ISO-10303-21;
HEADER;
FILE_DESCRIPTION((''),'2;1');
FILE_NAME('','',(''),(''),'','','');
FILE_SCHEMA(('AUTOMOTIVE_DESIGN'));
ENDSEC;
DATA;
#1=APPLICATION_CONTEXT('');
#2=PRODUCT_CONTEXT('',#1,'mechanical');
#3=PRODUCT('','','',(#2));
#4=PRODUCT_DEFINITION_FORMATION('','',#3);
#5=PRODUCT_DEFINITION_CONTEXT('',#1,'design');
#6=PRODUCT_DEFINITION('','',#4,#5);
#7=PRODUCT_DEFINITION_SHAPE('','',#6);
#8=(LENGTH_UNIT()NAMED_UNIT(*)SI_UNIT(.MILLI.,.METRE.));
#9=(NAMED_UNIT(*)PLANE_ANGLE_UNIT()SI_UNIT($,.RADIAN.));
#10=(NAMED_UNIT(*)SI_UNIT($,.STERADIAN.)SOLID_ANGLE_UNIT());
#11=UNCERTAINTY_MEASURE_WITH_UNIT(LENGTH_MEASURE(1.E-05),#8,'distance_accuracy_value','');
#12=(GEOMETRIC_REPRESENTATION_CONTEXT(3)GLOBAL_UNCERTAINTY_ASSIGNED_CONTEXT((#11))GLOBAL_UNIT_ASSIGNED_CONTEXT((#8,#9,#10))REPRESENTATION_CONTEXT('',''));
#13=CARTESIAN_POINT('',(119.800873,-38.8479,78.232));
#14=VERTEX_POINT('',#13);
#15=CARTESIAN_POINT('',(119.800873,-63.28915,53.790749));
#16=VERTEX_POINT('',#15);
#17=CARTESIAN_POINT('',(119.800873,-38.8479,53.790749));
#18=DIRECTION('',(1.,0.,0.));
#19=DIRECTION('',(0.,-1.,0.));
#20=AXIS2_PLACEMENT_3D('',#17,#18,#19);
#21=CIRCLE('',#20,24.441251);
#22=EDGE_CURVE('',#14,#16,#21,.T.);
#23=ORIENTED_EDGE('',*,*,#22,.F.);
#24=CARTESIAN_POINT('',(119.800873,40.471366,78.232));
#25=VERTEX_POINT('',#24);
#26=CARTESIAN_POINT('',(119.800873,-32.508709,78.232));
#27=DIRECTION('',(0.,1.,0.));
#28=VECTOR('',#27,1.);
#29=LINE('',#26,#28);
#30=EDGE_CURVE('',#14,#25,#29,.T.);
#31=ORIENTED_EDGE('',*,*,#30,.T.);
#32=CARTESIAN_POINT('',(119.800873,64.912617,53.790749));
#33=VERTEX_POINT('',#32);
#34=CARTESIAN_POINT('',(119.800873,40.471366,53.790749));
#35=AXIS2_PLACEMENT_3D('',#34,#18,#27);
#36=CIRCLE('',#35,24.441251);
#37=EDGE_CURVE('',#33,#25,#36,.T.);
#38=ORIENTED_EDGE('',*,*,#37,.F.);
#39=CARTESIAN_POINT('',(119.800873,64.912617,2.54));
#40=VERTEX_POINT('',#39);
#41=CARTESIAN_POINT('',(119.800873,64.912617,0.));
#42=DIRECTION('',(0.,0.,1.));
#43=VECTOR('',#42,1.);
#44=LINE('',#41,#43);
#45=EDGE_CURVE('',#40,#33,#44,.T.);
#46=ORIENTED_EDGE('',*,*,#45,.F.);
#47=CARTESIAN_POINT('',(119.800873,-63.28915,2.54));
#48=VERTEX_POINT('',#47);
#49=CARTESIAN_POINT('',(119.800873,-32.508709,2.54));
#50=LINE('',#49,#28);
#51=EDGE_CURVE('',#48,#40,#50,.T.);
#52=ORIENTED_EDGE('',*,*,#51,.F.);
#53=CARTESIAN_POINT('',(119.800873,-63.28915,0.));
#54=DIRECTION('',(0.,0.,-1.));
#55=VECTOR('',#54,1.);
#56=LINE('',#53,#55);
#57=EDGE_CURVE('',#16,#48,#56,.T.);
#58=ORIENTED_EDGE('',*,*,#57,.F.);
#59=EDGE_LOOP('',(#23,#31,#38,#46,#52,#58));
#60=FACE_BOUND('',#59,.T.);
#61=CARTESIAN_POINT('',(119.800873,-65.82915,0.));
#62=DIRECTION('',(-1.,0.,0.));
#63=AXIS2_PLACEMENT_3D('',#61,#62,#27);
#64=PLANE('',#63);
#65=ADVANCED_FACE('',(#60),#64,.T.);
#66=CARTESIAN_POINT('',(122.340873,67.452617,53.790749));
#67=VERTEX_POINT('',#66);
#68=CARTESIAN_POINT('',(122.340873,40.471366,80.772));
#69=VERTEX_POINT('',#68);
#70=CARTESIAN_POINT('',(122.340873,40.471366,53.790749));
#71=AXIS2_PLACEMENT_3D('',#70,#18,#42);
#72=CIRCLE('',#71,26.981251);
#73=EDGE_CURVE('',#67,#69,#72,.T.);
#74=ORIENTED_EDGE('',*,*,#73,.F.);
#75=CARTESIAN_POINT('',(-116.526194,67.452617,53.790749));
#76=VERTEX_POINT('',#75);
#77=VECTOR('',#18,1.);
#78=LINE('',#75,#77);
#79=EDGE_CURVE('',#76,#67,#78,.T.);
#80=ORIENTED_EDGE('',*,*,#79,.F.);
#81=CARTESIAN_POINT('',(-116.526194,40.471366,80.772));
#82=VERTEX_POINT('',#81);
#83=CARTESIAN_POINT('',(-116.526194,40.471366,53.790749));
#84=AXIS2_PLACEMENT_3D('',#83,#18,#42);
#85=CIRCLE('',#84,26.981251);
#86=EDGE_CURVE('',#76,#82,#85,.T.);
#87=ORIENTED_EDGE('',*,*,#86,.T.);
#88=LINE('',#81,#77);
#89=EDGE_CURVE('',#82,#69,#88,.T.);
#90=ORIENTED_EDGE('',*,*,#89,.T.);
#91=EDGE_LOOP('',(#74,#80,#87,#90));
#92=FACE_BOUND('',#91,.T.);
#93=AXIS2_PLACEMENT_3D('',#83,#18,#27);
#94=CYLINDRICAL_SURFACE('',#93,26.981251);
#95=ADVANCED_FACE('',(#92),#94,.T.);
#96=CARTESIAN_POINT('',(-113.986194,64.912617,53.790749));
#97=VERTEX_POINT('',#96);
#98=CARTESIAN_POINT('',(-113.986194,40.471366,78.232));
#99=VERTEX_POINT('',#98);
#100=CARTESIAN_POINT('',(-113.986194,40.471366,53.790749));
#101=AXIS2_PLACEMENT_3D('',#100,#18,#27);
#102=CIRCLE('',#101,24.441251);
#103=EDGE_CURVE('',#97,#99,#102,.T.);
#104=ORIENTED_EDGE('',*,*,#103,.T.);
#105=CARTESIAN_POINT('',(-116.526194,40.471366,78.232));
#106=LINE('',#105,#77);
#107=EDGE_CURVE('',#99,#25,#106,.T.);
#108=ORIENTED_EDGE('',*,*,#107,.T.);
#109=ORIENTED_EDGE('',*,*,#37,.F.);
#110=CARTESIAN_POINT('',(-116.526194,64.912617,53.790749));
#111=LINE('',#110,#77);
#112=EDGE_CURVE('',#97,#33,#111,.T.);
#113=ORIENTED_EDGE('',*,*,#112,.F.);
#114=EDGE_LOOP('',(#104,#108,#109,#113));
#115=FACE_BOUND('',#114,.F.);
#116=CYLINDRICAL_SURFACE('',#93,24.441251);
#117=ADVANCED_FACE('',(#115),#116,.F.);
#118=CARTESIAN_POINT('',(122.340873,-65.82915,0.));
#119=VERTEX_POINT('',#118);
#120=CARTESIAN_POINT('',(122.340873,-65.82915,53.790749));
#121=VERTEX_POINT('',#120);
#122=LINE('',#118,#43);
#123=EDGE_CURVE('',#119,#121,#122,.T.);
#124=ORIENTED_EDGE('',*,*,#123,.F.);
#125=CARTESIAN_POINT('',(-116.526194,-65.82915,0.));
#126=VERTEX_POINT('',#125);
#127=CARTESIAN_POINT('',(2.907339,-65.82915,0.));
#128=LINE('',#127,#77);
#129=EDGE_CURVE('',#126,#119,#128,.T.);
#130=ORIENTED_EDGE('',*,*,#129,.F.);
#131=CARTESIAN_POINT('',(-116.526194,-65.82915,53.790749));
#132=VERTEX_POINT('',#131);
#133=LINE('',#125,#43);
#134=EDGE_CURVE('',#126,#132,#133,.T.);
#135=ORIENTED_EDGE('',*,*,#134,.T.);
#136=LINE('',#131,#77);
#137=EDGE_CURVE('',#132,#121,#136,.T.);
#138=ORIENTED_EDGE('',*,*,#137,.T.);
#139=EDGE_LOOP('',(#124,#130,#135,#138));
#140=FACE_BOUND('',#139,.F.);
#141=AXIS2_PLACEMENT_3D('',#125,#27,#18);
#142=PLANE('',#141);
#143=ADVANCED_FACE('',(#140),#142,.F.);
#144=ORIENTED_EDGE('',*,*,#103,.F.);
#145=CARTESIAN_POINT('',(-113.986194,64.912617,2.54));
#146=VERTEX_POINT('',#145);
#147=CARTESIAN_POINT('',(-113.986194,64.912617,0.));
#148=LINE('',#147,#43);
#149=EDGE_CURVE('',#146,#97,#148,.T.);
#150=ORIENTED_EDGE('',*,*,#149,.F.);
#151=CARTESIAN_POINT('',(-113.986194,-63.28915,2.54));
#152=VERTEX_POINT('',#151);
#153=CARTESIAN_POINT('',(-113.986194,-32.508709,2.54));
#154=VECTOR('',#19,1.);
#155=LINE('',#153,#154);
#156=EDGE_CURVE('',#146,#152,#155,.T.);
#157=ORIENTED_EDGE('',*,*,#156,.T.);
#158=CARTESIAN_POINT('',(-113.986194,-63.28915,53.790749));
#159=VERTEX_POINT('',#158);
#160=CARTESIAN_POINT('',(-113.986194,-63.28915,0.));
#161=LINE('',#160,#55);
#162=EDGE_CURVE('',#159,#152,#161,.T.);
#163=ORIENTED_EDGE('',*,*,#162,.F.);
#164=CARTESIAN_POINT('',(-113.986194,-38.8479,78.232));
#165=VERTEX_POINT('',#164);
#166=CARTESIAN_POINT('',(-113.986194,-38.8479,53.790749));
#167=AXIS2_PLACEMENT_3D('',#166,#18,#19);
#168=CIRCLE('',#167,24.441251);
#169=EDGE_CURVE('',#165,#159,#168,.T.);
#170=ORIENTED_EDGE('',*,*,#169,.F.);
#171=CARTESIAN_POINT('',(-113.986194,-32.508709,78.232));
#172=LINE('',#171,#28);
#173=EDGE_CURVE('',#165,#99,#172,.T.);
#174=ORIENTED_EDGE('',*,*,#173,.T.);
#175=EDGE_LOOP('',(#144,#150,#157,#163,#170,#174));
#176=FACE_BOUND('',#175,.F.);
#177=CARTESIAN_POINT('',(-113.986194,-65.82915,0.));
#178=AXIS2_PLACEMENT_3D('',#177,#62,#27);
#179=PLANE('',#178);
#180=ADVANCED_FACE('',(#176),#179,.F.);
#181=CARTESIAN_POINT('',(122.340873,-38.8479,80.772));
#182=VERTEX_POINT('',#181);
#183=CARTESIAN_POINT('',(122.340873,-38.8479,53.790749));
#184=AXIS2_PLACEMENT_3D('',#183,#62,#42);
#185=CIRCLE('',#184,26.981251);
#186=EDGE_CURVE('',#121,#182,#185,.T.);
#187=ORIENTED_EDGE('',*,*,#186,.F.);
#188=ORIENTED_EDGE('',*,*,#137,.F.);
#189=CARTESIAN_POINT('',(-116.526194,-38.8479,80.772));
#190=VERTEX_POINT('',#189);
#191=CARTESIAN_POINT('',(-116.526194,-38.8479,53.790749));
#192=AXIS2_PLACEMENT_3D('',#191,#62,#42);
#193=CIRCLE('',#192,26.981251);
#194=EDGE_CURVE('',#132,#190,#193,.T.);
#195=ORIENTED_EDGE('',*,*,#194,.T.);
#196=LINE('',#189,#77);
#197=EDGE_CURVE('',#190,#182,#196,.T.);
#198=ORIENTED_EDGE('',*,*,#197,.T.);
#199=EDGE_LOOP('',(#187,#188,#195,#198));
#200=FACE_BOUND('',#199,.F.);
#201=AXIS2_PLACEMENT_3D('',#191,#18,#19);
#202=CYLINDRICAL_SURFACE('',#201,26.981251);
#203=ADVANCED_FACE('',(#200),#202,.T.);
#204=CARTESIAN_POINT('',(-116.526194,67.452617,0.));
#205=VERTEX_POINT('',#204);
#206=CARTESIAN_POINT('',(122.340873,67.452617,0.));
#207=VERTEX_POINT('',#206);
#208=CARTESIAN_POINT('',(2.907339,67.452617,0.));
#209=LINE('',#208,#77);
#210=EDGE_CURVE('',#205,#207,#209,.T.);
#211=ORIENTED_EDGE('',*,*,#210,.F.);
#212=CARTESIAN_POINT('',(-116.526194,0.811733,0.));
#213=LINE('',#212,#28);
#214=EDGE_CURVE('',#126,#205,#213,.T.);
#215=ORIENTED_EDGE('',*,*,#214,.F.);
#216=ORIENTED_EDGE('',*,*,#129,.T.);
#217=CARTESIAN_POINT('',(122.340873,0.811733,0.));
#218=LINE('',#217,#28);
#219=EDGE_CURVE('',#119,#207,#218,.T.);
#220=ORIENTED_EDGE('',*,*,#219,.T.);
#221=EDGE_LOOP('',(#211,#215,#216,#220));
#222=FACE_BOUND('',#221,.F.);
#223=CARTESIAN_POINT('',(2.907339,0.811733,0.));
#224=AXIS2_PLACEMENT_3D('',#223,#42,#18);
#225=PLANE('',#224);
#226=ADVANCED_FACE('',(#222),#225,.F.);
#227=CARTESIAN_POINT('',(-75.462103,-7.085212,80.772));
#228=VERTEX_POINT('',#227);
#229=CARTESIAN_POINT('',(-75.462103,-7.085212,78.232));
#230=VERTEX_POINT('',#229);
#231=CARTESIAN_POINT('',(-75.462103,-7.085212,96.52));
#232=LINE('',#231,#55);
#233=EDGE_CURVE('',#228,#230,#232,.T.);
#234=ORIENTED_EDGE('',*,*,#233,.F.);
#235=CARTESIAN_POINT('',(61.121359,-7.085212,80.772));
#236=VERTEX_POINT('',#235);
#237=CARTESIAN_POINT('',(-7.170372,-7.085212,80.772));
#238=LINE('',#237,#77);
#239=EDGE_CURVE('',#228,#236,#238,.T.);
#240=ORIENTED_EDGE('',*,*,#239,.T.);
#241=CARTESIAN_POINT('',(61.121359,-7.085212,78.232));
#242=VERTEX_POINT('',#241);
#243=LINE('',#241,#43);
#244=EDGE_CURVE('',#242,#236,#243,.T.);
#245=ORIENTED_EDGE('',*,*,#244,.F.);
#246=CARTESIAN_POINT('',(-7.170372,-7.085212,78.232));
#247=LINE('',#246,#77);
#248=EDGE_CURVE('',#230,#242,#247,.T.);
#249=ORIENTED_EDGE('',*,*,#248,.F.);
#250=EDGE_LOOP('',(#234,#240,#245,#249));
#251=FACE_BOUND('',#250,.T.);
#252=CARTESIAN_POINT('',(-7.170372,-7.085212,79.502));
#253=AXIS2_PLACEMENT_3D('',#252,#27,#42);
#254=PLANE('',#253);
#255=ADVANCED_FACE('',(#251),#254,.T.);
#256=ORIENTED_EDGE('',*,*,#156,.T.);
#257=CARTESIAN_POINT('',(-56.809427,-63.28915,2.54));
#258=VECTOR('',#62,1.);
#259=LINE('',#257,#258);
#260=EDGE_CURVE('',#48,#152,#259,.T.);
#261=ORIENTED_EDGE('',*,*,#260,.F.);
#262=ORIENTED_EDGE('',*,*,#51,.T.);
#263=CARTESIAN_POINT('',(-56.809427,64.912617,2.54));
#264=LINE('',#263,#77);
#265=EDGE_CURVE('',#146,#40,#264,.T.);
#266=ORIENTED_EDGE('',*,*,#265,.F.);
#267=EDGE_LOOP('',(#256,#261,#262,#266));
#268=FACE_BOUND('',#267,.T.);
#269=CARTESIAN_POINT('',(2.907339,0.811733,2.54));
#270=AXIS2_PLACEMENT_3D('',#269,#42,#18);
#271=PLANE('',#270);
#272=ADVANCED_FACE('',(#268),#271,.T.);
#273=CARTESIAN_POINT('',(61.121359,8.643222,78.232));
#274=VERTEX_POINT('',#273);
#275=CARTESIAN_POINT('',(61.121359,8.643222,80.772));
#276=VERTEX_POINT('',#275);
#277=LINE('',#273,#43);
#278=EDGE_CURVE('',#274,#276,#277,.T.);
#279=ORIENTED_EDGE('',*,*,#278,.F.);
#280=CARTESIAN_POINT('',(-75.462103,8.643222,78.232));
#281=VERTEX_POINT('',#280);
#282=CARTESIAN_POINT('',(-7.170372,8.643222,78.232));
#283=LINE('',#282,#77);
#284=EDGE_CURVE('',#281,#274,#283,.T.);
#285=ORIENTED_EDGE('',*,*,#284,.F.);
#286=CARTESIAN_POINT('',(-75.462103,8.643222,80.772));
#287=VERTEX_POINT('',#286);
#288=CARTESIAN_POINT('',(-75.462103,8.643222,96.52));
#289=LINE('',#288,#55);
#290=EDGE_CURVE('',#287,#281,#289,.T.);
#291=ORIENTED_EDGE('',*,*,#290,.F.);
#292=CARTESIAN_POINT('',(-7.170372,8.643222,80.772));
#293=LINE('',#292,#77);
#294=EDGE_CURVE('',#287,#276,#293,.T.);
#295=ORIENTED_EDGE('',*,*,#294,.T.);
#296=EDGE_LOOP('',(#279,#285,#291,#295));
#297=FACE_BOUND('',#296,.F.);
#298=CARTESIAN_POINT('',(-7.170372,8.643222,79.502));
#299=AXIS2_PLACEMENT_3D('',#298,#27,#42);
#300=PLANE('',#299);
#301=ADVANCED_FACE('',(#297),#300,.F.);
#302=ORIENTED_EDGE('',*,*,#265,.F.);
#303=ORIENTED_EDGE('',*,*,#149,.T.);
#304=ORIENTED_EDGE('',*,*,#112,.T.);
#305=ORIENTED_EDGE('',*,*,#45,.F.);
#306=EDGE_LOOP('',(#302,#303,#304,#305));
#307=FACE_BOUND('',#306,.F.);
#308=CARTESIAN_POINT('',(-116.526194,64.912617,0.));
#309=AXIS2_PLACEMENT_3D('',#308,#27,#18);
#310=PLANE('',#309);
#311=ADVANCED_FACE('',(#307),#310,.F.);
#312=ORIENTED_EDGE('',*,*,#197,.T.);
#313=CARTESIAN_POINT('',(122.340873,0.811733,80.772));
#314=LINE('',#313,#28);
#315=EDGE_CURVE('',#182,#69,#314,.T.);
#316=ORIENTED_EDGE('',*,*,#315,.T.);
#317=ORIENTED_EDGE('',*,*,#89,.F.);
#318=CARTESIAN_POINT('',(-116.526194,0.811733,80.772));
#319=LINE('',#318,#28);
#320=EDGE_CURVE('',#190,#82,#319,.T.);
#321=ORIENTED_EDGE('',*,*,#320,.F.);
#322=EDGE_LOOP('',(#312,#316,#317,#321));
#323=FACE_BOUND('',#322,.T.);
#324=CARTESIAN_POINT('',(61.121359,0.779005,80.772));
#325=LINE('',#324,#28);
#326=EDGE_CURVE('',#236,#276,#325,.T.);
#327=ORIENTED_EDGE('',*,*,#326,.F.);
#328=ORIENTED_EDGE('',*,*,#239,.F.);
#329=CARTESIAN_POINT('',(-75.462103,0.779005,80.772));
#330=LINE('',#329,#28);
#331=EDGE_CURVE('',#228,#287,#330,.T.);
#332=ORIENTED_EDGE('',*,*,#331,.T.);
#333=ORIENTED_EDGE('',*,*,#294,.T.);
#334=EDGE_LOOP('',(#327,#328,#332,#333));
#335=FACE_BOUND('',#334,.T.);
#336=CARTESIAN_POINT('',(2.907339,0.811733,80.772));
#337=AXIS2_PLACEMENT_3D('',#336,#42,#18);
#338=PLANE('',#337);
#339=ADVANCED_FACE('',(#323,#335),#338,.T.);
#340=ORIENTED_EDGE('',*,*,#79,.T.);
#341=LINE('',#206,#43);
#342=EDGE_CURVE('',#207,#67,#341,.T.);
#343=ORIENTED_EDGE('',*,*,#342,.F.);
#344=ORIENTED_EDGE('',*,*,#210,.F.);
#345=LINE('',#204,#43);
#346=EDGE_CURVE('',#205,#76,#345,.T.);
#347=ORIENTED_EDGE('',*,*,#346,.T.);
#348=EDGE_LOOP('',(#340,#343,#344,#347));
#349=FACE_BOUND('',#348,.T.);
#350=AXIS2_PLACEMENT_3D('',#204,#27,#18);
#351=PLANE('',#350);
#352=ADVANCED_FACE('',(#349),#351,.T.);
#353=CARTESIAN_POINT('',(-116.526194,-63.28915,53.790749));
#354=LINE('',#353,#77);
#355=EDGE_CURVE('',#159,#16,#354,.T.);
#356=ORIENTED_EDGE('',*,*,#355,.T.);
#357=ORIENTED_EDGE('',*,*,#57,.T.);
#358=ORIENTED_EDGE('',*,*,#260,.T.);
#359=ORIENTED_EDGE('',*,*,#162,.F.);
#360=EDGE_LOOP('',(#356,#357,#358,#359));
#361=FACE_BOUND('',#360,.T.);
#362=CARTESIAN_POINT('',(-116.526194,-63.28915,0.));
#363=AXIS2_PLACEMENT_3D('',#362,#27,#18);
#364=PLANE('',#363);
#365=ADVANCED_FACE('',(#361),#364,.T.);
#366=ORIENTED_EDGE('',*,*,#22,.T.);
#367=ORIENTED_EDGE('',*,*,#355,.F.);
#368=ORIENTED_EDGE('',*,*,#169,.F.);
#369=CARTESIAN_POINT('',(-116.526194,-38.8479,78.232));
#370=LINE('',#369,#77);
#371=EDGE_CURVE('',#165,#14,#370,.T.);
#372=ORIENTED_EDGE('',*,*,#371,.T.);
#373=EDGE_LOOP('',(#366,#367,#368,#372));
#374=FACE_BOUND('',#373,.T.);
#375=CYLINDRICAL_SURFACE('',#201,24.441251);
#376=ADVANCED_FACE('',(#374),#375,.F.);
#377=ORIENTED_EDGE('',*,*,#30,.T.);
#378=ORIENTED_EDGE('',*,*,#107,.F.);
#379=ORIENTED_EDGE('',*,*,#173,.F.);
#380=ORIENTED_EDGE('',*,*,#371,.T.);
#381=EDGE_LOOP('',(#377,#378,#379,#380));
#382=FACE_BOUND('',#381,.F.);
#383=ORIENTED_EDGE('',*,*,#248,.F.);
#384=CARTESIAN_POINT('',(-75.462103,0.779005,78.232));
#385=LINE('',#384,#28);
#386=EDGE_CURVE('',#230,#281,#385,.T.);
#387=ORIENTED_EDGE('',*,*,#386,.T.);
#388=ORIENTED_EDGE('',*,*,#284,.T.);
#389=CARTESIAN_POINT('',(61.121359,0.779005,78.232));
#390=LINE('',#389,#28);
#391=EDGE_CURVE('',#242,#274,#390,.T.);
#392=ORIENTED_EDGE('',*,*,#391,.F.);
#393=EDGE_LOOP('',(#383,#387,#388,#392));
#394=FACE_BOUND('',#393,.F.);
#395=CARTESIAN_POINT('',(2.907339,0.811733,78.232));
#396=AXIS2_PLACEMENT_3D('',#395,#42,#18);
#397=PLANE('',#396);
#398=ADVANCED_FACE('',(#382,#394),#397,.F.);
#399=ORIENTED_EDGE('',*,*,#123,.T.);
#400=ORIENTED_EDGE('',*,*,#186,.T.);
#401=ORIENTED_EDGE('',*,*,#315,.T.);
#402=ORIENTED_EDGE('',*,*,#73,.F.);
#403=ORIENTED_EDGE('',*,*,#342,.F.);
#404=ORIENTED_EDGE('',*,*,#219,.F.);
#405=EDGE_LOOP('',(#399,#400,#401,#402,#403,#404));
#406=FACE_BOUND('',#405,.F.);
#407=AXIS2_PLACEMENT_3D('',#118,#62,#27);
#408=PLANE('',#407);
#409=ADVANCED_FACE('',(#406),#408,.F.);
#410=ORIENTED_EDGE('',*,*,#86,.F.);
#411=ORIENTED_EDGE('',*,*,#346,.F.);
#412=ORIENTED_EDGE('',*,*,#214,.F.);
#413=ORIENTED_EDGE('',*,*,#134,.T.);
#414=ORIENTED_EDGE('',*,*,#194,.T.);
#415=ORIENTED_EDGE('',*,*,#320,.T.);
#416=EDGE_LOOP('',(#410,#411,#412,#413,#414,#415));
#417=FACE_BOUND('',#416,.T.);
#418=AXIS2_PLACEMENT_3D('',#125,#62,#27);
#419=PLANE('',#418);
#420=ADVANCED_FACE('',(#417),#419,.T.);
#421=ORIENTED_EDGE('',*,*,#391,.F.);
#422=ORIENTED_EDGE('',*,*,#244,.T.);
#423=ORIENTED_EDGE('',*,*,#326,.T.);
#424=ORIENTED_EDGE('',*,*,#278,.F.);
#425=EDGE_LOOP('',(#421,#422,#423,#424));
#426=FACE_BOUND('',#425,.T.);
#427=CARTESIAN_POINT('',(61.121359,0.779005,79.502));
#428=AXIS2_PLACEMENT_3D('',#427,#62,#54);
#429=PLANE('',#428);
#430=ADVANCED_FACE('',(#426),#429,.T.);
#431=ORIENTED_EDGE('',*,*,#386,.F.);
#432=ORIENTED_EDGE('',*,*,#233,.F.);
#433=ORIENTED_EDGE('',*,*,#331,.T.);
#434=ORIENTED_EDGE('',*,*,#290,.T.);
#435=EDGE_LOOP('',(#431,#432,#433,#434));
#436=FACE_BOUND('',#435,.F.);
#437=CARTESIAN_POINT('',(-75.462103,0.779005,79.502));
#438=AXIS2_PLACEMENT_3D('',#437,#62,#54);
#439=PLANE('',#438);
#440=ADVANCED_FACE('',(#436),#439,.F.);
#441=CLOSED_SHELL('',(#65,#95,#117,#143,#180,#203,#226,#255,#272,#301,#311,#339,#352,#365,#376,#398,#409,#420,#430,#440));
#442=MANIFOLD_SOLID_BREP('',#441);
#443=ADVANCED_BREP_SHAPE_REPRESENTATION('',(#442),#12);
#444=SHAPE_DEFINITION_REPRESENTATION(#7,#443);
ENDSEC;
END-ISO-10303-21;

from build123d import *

# Parameters (mm, degrees)
F0_W     = 238.8670668006
F0_H     = 133.2817673683
F1_DEPTH = 80.772
F2_R     = 26.9812507731
F3_W     = 136.5834623575
F3_H     = 15.7284336165
F4_DEPTH = 15.748
F5_T     = 2.54


# Not quite as in the source:
# - a shell that OpenCascade refuses in one call is made with other operations: the cavity is built on its own and cut out


with BuildPart() as f1:
    # F0 (on Top) → F1 (new body)
    with BuildSketch(Plane.XY):
        with Locations((2.9073394835, 0.8117333055)):
            Rectangle(F0_W, F0_H)
    extrude(amount=F1_DEPTH)

    # F2
    f2_edges = [f1.edges().sort_by_distance(p)[0] for p in [
        (2.907339, -65.82915, 80.772),
        (2.907339, 67.452617, 80.772),
    ]]
    fillet(f2_edges, radius=F2_R)

    # F3 (on face) → F4 (join)
    with BuildSketch(Plane.XY.offset(80.772)):
        with Locations((-7.1703717113, 0.7790052332)):
            Rectangle(F3_W, F3_H)
    extrude(amount=F4_DEPTH)

    # F5: shell of thickness 2.54, made by hand


with BuildPart() as f5_core1:
    # F5_t2: copy of F1
    add(f1.part)

    # the walls: a layer under each face that stays
    f5_faces = [f5_core1.faces().sort_by_distance(p)[0] for p in [
        (2.9073394835, 67.4526169896, 26.8953746135),
        (122.3408728838, 0.8117333055, 40.386),
        (2.9073394835, 59.5499916031, 72.8693746135),
        (2.9073394835, 0.8117333055, 0),
        (-116.5261939168, 0.8117333055, 40.386),
        (2.9073394835, -65.8291503787, 26.8953746135),
        (2.9073394835, -57.9265249922, 72.8693746135),
        (-76.7150161167, -25.6280219686, 80.772),
    ]]
    thicken(f5_faces, amount=-F5_T, mode=Mode.SUBTRACT)


with BuildPart() as f1_1:
    add(f1.part)

    # what is left inside the walls is the cavity
    f5_cavity = [f5_core1.part.solids().sort_by_distance(p)[0] for p in [
        (2.907339, -20.555228, 2.5654),
    ]]
    add(f5_cavity, mode=Mode.SUBTRACT)


solid = f1_1.part
